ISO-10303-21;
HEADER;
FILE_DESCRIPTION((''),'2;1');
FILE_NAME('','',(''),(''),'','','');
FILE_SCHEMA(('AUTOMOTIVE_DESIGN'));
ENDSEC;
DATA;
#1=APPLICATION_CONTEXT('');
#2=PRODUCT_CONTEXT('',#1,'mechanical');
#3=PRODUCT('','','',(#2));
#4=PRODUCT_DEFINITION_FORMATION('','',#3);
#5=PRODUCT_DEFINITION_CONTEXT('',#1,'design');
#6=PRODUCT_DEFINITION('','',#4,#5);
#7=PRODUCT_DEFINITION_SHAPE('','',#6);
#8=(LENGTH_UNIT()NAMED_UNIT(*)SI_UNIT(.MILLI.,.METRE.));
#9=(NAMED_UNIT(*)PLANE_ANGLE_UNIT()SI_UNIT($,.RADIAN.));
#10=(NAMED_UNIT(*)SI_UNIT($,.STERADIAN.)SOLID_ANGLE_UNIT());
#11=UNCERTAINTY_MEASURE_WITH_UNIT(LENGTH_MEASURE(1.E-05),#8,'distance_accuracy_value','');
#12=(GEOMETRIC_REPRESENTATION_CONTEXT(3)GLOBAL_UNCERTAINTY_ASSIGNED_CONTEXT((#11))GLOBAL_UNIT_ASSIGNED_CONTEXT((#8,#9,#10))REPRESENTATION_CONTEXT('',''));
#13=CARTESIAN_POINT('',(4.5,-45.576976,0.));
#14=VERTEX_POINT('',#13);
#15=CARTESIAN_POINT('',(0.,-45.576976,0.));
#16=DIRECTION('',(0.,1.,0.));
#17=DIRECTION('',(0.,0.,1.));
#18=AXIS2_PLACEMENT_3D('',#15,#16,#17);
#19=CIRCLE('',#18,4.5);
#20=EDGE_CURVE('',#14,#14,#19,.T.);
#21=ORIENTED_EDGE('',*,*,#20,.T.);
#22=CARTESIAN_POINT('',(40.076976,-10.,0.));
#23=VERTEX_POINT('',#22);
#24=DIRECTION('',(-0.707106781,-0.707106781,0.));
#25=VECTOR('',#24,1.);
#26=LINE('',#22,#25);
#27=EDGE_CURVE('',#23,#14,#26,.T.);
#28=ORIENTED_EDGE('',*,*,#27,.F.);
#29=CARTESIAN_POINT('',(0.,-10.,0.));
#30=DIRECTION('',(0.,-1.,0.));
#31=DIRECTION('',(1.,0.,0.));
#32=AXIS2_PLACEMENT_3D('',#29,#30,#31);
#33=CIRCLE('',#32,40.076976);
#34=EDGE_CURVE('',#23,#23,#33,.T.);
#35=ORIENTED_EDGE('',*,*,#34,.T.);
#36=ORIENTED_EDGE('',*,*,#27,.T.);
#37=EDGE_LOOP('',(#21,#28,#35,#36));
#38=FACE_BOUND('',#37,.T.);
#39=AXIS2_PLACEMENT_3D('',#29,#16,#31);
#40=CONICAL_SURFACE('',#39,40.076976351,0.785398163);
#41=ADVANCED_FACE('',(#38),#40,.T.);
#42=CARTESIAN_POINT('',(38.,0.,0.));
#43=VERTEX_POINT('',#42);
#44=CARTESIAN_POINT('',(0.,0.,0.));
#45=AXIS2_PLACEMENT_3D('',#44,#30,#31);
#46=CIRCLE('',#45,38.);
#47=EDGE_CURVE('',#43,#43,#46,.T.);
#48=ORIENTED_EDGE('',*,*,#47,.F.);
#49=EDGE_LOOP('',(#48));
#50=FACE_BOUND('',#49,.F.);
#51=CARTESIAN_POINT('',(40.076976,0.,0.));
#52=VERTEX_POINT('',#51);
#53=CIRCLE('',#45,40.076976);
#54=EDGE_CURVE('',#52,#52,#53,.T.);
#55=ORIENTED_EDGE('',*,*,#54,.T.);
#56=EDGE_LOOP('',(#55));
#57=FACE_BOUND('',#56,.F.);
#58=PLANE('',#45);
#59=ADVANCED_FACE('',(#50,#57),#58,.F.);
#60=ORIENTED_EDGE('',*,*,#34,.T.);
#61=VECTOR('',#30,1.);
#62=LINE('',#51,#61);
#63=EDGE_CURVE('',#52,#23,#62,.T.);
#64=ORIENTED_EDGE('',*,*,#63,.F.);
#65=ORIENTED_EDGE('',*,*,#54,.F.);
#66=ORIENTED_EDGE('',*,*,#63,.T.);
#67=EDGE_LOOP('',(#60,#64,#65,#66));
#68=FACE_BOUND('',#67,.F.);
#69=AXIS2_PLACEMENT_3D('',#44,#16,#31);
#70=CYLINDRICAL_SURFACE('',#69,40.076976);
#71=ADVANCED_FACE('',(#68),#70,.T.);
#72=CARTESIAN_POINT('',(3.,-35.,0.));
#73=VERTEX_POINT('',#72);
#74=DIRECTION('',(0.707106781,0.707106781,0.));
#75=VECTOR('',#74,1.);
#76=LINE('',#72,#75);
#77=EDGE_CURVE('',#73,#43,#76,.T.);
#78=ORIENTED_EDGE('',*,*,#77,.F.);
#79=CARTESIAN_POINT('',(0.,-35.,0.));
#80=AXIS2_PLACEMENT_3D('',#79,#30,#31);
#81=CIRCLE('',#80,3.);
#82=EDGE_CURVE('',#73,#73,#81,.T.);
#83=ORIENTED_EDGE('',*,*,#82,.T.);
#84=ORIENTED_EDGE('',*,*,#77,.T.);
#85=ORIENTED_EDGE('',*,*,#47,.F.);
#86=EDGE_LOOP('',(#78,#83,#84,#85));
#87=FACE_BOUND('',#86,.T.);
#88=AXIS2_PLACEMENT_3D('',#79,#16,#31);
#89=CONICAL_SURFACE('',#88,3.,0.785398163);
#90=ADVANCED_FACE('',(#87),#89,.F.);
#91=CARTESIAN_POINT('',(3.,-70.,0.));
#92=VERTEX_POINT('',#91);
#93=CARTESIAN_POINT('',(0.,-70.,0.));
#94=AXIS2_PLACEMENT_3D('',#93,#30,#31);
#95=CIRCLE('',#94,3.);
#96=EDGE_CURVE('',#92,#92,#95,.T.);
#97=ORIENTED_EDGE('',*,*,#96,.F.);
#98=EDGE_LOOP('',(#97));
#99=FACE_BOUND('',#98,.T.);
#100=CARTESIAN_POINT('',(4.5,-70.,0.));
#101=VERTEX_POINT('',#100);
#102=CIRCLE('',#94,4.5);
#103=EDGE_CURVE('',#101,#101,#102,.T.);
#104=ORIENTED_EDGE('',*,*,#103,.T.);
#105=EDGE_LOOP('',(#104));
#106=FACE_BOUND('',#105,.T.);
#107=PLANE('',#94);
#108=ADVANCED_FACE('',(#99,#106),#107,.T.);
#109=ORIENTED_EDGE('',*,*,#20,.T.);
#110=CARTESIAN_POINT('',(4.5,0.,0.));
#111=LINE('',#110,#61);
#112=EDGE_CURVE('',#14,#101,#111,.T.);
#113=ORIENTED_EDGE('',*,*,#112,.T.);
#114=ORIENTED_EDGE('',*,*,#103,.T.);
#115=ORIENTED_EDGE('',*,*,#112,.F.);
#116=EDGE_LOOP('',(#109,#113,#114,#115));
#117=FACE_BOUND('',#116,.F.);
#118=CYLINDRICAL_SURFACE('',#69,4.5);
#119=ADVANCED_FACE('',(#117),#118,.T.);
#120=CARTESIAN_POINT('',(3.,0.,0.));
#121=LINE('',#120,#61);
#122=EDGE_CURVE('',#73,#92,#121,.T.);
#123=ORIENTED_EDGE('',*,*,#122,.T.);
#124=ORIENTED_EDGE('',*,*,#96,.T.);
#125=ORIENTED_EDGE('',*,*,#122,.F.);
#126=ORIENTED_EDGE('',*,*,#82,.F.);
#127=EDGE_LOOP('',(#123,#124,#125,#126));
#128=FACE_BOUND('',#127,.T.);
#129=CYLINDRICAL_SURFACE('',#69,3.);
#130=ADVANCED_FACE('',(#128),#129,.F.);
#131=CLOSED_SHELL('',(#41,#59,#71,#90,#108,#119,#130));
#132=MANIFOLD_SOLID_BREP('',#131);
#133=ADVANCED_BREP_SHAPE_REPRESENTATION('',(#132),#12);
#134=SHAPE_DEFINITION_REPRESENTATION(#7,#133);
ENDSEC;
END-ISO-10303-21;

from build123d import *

# Parameters (mm, degrees)
F0_R     = 40.076976351
F0_R_2   = 4.5
F1_DEPTH = 50
F0_R_3   = 3
F3_DEPTH = 70
F4_SIZE  = 35


# Not quite as in the source:
# - a fillet or chamfer that OpenCascade refuses, or shapes differently, is made with other operations: its cross-section is extruded or revolved along the edge and cut away or added


with BuildPart() as f1:
    # F0 (on Front) → F1 (new body)
    with BuildSketch(Plane.XZ):
        Circle(F0_R)
        Circle(F0_R_2, mode=Mode.SUBTRACT)
    extrude(amount=F1_DEPTH)

    # F2: chamfer of 40 on 1 edges, made by hand

    # F2_s1 → F2_t2 (revolve, cut)
    with BuildSketch(Plane.XY):
        Polygon((40.076976351, -10), (0.076976351, -50), (40.076976351, -50), align=None)
    revolve(axis=Axis((0, -50, 0), (0, -1, 0)), mode=Mode.SUBTRACT)

    # F0 (on Front) → F3 (join)
    with BuildSketch(Plane.XZ):
        Circle(F0_R_2)
        Circle(F0_R_3, mode=Mode.SUBTRACT)
    extrude(amount=F3_DEPTH)

    # F4
    f4_edges = [f1.edges().sort_by_distance(p)[0] for p in [
        (-3, 0, 0),
    ]]
    chamfer(f4_edges, length=F4_SIZE)


solid = f1.part
